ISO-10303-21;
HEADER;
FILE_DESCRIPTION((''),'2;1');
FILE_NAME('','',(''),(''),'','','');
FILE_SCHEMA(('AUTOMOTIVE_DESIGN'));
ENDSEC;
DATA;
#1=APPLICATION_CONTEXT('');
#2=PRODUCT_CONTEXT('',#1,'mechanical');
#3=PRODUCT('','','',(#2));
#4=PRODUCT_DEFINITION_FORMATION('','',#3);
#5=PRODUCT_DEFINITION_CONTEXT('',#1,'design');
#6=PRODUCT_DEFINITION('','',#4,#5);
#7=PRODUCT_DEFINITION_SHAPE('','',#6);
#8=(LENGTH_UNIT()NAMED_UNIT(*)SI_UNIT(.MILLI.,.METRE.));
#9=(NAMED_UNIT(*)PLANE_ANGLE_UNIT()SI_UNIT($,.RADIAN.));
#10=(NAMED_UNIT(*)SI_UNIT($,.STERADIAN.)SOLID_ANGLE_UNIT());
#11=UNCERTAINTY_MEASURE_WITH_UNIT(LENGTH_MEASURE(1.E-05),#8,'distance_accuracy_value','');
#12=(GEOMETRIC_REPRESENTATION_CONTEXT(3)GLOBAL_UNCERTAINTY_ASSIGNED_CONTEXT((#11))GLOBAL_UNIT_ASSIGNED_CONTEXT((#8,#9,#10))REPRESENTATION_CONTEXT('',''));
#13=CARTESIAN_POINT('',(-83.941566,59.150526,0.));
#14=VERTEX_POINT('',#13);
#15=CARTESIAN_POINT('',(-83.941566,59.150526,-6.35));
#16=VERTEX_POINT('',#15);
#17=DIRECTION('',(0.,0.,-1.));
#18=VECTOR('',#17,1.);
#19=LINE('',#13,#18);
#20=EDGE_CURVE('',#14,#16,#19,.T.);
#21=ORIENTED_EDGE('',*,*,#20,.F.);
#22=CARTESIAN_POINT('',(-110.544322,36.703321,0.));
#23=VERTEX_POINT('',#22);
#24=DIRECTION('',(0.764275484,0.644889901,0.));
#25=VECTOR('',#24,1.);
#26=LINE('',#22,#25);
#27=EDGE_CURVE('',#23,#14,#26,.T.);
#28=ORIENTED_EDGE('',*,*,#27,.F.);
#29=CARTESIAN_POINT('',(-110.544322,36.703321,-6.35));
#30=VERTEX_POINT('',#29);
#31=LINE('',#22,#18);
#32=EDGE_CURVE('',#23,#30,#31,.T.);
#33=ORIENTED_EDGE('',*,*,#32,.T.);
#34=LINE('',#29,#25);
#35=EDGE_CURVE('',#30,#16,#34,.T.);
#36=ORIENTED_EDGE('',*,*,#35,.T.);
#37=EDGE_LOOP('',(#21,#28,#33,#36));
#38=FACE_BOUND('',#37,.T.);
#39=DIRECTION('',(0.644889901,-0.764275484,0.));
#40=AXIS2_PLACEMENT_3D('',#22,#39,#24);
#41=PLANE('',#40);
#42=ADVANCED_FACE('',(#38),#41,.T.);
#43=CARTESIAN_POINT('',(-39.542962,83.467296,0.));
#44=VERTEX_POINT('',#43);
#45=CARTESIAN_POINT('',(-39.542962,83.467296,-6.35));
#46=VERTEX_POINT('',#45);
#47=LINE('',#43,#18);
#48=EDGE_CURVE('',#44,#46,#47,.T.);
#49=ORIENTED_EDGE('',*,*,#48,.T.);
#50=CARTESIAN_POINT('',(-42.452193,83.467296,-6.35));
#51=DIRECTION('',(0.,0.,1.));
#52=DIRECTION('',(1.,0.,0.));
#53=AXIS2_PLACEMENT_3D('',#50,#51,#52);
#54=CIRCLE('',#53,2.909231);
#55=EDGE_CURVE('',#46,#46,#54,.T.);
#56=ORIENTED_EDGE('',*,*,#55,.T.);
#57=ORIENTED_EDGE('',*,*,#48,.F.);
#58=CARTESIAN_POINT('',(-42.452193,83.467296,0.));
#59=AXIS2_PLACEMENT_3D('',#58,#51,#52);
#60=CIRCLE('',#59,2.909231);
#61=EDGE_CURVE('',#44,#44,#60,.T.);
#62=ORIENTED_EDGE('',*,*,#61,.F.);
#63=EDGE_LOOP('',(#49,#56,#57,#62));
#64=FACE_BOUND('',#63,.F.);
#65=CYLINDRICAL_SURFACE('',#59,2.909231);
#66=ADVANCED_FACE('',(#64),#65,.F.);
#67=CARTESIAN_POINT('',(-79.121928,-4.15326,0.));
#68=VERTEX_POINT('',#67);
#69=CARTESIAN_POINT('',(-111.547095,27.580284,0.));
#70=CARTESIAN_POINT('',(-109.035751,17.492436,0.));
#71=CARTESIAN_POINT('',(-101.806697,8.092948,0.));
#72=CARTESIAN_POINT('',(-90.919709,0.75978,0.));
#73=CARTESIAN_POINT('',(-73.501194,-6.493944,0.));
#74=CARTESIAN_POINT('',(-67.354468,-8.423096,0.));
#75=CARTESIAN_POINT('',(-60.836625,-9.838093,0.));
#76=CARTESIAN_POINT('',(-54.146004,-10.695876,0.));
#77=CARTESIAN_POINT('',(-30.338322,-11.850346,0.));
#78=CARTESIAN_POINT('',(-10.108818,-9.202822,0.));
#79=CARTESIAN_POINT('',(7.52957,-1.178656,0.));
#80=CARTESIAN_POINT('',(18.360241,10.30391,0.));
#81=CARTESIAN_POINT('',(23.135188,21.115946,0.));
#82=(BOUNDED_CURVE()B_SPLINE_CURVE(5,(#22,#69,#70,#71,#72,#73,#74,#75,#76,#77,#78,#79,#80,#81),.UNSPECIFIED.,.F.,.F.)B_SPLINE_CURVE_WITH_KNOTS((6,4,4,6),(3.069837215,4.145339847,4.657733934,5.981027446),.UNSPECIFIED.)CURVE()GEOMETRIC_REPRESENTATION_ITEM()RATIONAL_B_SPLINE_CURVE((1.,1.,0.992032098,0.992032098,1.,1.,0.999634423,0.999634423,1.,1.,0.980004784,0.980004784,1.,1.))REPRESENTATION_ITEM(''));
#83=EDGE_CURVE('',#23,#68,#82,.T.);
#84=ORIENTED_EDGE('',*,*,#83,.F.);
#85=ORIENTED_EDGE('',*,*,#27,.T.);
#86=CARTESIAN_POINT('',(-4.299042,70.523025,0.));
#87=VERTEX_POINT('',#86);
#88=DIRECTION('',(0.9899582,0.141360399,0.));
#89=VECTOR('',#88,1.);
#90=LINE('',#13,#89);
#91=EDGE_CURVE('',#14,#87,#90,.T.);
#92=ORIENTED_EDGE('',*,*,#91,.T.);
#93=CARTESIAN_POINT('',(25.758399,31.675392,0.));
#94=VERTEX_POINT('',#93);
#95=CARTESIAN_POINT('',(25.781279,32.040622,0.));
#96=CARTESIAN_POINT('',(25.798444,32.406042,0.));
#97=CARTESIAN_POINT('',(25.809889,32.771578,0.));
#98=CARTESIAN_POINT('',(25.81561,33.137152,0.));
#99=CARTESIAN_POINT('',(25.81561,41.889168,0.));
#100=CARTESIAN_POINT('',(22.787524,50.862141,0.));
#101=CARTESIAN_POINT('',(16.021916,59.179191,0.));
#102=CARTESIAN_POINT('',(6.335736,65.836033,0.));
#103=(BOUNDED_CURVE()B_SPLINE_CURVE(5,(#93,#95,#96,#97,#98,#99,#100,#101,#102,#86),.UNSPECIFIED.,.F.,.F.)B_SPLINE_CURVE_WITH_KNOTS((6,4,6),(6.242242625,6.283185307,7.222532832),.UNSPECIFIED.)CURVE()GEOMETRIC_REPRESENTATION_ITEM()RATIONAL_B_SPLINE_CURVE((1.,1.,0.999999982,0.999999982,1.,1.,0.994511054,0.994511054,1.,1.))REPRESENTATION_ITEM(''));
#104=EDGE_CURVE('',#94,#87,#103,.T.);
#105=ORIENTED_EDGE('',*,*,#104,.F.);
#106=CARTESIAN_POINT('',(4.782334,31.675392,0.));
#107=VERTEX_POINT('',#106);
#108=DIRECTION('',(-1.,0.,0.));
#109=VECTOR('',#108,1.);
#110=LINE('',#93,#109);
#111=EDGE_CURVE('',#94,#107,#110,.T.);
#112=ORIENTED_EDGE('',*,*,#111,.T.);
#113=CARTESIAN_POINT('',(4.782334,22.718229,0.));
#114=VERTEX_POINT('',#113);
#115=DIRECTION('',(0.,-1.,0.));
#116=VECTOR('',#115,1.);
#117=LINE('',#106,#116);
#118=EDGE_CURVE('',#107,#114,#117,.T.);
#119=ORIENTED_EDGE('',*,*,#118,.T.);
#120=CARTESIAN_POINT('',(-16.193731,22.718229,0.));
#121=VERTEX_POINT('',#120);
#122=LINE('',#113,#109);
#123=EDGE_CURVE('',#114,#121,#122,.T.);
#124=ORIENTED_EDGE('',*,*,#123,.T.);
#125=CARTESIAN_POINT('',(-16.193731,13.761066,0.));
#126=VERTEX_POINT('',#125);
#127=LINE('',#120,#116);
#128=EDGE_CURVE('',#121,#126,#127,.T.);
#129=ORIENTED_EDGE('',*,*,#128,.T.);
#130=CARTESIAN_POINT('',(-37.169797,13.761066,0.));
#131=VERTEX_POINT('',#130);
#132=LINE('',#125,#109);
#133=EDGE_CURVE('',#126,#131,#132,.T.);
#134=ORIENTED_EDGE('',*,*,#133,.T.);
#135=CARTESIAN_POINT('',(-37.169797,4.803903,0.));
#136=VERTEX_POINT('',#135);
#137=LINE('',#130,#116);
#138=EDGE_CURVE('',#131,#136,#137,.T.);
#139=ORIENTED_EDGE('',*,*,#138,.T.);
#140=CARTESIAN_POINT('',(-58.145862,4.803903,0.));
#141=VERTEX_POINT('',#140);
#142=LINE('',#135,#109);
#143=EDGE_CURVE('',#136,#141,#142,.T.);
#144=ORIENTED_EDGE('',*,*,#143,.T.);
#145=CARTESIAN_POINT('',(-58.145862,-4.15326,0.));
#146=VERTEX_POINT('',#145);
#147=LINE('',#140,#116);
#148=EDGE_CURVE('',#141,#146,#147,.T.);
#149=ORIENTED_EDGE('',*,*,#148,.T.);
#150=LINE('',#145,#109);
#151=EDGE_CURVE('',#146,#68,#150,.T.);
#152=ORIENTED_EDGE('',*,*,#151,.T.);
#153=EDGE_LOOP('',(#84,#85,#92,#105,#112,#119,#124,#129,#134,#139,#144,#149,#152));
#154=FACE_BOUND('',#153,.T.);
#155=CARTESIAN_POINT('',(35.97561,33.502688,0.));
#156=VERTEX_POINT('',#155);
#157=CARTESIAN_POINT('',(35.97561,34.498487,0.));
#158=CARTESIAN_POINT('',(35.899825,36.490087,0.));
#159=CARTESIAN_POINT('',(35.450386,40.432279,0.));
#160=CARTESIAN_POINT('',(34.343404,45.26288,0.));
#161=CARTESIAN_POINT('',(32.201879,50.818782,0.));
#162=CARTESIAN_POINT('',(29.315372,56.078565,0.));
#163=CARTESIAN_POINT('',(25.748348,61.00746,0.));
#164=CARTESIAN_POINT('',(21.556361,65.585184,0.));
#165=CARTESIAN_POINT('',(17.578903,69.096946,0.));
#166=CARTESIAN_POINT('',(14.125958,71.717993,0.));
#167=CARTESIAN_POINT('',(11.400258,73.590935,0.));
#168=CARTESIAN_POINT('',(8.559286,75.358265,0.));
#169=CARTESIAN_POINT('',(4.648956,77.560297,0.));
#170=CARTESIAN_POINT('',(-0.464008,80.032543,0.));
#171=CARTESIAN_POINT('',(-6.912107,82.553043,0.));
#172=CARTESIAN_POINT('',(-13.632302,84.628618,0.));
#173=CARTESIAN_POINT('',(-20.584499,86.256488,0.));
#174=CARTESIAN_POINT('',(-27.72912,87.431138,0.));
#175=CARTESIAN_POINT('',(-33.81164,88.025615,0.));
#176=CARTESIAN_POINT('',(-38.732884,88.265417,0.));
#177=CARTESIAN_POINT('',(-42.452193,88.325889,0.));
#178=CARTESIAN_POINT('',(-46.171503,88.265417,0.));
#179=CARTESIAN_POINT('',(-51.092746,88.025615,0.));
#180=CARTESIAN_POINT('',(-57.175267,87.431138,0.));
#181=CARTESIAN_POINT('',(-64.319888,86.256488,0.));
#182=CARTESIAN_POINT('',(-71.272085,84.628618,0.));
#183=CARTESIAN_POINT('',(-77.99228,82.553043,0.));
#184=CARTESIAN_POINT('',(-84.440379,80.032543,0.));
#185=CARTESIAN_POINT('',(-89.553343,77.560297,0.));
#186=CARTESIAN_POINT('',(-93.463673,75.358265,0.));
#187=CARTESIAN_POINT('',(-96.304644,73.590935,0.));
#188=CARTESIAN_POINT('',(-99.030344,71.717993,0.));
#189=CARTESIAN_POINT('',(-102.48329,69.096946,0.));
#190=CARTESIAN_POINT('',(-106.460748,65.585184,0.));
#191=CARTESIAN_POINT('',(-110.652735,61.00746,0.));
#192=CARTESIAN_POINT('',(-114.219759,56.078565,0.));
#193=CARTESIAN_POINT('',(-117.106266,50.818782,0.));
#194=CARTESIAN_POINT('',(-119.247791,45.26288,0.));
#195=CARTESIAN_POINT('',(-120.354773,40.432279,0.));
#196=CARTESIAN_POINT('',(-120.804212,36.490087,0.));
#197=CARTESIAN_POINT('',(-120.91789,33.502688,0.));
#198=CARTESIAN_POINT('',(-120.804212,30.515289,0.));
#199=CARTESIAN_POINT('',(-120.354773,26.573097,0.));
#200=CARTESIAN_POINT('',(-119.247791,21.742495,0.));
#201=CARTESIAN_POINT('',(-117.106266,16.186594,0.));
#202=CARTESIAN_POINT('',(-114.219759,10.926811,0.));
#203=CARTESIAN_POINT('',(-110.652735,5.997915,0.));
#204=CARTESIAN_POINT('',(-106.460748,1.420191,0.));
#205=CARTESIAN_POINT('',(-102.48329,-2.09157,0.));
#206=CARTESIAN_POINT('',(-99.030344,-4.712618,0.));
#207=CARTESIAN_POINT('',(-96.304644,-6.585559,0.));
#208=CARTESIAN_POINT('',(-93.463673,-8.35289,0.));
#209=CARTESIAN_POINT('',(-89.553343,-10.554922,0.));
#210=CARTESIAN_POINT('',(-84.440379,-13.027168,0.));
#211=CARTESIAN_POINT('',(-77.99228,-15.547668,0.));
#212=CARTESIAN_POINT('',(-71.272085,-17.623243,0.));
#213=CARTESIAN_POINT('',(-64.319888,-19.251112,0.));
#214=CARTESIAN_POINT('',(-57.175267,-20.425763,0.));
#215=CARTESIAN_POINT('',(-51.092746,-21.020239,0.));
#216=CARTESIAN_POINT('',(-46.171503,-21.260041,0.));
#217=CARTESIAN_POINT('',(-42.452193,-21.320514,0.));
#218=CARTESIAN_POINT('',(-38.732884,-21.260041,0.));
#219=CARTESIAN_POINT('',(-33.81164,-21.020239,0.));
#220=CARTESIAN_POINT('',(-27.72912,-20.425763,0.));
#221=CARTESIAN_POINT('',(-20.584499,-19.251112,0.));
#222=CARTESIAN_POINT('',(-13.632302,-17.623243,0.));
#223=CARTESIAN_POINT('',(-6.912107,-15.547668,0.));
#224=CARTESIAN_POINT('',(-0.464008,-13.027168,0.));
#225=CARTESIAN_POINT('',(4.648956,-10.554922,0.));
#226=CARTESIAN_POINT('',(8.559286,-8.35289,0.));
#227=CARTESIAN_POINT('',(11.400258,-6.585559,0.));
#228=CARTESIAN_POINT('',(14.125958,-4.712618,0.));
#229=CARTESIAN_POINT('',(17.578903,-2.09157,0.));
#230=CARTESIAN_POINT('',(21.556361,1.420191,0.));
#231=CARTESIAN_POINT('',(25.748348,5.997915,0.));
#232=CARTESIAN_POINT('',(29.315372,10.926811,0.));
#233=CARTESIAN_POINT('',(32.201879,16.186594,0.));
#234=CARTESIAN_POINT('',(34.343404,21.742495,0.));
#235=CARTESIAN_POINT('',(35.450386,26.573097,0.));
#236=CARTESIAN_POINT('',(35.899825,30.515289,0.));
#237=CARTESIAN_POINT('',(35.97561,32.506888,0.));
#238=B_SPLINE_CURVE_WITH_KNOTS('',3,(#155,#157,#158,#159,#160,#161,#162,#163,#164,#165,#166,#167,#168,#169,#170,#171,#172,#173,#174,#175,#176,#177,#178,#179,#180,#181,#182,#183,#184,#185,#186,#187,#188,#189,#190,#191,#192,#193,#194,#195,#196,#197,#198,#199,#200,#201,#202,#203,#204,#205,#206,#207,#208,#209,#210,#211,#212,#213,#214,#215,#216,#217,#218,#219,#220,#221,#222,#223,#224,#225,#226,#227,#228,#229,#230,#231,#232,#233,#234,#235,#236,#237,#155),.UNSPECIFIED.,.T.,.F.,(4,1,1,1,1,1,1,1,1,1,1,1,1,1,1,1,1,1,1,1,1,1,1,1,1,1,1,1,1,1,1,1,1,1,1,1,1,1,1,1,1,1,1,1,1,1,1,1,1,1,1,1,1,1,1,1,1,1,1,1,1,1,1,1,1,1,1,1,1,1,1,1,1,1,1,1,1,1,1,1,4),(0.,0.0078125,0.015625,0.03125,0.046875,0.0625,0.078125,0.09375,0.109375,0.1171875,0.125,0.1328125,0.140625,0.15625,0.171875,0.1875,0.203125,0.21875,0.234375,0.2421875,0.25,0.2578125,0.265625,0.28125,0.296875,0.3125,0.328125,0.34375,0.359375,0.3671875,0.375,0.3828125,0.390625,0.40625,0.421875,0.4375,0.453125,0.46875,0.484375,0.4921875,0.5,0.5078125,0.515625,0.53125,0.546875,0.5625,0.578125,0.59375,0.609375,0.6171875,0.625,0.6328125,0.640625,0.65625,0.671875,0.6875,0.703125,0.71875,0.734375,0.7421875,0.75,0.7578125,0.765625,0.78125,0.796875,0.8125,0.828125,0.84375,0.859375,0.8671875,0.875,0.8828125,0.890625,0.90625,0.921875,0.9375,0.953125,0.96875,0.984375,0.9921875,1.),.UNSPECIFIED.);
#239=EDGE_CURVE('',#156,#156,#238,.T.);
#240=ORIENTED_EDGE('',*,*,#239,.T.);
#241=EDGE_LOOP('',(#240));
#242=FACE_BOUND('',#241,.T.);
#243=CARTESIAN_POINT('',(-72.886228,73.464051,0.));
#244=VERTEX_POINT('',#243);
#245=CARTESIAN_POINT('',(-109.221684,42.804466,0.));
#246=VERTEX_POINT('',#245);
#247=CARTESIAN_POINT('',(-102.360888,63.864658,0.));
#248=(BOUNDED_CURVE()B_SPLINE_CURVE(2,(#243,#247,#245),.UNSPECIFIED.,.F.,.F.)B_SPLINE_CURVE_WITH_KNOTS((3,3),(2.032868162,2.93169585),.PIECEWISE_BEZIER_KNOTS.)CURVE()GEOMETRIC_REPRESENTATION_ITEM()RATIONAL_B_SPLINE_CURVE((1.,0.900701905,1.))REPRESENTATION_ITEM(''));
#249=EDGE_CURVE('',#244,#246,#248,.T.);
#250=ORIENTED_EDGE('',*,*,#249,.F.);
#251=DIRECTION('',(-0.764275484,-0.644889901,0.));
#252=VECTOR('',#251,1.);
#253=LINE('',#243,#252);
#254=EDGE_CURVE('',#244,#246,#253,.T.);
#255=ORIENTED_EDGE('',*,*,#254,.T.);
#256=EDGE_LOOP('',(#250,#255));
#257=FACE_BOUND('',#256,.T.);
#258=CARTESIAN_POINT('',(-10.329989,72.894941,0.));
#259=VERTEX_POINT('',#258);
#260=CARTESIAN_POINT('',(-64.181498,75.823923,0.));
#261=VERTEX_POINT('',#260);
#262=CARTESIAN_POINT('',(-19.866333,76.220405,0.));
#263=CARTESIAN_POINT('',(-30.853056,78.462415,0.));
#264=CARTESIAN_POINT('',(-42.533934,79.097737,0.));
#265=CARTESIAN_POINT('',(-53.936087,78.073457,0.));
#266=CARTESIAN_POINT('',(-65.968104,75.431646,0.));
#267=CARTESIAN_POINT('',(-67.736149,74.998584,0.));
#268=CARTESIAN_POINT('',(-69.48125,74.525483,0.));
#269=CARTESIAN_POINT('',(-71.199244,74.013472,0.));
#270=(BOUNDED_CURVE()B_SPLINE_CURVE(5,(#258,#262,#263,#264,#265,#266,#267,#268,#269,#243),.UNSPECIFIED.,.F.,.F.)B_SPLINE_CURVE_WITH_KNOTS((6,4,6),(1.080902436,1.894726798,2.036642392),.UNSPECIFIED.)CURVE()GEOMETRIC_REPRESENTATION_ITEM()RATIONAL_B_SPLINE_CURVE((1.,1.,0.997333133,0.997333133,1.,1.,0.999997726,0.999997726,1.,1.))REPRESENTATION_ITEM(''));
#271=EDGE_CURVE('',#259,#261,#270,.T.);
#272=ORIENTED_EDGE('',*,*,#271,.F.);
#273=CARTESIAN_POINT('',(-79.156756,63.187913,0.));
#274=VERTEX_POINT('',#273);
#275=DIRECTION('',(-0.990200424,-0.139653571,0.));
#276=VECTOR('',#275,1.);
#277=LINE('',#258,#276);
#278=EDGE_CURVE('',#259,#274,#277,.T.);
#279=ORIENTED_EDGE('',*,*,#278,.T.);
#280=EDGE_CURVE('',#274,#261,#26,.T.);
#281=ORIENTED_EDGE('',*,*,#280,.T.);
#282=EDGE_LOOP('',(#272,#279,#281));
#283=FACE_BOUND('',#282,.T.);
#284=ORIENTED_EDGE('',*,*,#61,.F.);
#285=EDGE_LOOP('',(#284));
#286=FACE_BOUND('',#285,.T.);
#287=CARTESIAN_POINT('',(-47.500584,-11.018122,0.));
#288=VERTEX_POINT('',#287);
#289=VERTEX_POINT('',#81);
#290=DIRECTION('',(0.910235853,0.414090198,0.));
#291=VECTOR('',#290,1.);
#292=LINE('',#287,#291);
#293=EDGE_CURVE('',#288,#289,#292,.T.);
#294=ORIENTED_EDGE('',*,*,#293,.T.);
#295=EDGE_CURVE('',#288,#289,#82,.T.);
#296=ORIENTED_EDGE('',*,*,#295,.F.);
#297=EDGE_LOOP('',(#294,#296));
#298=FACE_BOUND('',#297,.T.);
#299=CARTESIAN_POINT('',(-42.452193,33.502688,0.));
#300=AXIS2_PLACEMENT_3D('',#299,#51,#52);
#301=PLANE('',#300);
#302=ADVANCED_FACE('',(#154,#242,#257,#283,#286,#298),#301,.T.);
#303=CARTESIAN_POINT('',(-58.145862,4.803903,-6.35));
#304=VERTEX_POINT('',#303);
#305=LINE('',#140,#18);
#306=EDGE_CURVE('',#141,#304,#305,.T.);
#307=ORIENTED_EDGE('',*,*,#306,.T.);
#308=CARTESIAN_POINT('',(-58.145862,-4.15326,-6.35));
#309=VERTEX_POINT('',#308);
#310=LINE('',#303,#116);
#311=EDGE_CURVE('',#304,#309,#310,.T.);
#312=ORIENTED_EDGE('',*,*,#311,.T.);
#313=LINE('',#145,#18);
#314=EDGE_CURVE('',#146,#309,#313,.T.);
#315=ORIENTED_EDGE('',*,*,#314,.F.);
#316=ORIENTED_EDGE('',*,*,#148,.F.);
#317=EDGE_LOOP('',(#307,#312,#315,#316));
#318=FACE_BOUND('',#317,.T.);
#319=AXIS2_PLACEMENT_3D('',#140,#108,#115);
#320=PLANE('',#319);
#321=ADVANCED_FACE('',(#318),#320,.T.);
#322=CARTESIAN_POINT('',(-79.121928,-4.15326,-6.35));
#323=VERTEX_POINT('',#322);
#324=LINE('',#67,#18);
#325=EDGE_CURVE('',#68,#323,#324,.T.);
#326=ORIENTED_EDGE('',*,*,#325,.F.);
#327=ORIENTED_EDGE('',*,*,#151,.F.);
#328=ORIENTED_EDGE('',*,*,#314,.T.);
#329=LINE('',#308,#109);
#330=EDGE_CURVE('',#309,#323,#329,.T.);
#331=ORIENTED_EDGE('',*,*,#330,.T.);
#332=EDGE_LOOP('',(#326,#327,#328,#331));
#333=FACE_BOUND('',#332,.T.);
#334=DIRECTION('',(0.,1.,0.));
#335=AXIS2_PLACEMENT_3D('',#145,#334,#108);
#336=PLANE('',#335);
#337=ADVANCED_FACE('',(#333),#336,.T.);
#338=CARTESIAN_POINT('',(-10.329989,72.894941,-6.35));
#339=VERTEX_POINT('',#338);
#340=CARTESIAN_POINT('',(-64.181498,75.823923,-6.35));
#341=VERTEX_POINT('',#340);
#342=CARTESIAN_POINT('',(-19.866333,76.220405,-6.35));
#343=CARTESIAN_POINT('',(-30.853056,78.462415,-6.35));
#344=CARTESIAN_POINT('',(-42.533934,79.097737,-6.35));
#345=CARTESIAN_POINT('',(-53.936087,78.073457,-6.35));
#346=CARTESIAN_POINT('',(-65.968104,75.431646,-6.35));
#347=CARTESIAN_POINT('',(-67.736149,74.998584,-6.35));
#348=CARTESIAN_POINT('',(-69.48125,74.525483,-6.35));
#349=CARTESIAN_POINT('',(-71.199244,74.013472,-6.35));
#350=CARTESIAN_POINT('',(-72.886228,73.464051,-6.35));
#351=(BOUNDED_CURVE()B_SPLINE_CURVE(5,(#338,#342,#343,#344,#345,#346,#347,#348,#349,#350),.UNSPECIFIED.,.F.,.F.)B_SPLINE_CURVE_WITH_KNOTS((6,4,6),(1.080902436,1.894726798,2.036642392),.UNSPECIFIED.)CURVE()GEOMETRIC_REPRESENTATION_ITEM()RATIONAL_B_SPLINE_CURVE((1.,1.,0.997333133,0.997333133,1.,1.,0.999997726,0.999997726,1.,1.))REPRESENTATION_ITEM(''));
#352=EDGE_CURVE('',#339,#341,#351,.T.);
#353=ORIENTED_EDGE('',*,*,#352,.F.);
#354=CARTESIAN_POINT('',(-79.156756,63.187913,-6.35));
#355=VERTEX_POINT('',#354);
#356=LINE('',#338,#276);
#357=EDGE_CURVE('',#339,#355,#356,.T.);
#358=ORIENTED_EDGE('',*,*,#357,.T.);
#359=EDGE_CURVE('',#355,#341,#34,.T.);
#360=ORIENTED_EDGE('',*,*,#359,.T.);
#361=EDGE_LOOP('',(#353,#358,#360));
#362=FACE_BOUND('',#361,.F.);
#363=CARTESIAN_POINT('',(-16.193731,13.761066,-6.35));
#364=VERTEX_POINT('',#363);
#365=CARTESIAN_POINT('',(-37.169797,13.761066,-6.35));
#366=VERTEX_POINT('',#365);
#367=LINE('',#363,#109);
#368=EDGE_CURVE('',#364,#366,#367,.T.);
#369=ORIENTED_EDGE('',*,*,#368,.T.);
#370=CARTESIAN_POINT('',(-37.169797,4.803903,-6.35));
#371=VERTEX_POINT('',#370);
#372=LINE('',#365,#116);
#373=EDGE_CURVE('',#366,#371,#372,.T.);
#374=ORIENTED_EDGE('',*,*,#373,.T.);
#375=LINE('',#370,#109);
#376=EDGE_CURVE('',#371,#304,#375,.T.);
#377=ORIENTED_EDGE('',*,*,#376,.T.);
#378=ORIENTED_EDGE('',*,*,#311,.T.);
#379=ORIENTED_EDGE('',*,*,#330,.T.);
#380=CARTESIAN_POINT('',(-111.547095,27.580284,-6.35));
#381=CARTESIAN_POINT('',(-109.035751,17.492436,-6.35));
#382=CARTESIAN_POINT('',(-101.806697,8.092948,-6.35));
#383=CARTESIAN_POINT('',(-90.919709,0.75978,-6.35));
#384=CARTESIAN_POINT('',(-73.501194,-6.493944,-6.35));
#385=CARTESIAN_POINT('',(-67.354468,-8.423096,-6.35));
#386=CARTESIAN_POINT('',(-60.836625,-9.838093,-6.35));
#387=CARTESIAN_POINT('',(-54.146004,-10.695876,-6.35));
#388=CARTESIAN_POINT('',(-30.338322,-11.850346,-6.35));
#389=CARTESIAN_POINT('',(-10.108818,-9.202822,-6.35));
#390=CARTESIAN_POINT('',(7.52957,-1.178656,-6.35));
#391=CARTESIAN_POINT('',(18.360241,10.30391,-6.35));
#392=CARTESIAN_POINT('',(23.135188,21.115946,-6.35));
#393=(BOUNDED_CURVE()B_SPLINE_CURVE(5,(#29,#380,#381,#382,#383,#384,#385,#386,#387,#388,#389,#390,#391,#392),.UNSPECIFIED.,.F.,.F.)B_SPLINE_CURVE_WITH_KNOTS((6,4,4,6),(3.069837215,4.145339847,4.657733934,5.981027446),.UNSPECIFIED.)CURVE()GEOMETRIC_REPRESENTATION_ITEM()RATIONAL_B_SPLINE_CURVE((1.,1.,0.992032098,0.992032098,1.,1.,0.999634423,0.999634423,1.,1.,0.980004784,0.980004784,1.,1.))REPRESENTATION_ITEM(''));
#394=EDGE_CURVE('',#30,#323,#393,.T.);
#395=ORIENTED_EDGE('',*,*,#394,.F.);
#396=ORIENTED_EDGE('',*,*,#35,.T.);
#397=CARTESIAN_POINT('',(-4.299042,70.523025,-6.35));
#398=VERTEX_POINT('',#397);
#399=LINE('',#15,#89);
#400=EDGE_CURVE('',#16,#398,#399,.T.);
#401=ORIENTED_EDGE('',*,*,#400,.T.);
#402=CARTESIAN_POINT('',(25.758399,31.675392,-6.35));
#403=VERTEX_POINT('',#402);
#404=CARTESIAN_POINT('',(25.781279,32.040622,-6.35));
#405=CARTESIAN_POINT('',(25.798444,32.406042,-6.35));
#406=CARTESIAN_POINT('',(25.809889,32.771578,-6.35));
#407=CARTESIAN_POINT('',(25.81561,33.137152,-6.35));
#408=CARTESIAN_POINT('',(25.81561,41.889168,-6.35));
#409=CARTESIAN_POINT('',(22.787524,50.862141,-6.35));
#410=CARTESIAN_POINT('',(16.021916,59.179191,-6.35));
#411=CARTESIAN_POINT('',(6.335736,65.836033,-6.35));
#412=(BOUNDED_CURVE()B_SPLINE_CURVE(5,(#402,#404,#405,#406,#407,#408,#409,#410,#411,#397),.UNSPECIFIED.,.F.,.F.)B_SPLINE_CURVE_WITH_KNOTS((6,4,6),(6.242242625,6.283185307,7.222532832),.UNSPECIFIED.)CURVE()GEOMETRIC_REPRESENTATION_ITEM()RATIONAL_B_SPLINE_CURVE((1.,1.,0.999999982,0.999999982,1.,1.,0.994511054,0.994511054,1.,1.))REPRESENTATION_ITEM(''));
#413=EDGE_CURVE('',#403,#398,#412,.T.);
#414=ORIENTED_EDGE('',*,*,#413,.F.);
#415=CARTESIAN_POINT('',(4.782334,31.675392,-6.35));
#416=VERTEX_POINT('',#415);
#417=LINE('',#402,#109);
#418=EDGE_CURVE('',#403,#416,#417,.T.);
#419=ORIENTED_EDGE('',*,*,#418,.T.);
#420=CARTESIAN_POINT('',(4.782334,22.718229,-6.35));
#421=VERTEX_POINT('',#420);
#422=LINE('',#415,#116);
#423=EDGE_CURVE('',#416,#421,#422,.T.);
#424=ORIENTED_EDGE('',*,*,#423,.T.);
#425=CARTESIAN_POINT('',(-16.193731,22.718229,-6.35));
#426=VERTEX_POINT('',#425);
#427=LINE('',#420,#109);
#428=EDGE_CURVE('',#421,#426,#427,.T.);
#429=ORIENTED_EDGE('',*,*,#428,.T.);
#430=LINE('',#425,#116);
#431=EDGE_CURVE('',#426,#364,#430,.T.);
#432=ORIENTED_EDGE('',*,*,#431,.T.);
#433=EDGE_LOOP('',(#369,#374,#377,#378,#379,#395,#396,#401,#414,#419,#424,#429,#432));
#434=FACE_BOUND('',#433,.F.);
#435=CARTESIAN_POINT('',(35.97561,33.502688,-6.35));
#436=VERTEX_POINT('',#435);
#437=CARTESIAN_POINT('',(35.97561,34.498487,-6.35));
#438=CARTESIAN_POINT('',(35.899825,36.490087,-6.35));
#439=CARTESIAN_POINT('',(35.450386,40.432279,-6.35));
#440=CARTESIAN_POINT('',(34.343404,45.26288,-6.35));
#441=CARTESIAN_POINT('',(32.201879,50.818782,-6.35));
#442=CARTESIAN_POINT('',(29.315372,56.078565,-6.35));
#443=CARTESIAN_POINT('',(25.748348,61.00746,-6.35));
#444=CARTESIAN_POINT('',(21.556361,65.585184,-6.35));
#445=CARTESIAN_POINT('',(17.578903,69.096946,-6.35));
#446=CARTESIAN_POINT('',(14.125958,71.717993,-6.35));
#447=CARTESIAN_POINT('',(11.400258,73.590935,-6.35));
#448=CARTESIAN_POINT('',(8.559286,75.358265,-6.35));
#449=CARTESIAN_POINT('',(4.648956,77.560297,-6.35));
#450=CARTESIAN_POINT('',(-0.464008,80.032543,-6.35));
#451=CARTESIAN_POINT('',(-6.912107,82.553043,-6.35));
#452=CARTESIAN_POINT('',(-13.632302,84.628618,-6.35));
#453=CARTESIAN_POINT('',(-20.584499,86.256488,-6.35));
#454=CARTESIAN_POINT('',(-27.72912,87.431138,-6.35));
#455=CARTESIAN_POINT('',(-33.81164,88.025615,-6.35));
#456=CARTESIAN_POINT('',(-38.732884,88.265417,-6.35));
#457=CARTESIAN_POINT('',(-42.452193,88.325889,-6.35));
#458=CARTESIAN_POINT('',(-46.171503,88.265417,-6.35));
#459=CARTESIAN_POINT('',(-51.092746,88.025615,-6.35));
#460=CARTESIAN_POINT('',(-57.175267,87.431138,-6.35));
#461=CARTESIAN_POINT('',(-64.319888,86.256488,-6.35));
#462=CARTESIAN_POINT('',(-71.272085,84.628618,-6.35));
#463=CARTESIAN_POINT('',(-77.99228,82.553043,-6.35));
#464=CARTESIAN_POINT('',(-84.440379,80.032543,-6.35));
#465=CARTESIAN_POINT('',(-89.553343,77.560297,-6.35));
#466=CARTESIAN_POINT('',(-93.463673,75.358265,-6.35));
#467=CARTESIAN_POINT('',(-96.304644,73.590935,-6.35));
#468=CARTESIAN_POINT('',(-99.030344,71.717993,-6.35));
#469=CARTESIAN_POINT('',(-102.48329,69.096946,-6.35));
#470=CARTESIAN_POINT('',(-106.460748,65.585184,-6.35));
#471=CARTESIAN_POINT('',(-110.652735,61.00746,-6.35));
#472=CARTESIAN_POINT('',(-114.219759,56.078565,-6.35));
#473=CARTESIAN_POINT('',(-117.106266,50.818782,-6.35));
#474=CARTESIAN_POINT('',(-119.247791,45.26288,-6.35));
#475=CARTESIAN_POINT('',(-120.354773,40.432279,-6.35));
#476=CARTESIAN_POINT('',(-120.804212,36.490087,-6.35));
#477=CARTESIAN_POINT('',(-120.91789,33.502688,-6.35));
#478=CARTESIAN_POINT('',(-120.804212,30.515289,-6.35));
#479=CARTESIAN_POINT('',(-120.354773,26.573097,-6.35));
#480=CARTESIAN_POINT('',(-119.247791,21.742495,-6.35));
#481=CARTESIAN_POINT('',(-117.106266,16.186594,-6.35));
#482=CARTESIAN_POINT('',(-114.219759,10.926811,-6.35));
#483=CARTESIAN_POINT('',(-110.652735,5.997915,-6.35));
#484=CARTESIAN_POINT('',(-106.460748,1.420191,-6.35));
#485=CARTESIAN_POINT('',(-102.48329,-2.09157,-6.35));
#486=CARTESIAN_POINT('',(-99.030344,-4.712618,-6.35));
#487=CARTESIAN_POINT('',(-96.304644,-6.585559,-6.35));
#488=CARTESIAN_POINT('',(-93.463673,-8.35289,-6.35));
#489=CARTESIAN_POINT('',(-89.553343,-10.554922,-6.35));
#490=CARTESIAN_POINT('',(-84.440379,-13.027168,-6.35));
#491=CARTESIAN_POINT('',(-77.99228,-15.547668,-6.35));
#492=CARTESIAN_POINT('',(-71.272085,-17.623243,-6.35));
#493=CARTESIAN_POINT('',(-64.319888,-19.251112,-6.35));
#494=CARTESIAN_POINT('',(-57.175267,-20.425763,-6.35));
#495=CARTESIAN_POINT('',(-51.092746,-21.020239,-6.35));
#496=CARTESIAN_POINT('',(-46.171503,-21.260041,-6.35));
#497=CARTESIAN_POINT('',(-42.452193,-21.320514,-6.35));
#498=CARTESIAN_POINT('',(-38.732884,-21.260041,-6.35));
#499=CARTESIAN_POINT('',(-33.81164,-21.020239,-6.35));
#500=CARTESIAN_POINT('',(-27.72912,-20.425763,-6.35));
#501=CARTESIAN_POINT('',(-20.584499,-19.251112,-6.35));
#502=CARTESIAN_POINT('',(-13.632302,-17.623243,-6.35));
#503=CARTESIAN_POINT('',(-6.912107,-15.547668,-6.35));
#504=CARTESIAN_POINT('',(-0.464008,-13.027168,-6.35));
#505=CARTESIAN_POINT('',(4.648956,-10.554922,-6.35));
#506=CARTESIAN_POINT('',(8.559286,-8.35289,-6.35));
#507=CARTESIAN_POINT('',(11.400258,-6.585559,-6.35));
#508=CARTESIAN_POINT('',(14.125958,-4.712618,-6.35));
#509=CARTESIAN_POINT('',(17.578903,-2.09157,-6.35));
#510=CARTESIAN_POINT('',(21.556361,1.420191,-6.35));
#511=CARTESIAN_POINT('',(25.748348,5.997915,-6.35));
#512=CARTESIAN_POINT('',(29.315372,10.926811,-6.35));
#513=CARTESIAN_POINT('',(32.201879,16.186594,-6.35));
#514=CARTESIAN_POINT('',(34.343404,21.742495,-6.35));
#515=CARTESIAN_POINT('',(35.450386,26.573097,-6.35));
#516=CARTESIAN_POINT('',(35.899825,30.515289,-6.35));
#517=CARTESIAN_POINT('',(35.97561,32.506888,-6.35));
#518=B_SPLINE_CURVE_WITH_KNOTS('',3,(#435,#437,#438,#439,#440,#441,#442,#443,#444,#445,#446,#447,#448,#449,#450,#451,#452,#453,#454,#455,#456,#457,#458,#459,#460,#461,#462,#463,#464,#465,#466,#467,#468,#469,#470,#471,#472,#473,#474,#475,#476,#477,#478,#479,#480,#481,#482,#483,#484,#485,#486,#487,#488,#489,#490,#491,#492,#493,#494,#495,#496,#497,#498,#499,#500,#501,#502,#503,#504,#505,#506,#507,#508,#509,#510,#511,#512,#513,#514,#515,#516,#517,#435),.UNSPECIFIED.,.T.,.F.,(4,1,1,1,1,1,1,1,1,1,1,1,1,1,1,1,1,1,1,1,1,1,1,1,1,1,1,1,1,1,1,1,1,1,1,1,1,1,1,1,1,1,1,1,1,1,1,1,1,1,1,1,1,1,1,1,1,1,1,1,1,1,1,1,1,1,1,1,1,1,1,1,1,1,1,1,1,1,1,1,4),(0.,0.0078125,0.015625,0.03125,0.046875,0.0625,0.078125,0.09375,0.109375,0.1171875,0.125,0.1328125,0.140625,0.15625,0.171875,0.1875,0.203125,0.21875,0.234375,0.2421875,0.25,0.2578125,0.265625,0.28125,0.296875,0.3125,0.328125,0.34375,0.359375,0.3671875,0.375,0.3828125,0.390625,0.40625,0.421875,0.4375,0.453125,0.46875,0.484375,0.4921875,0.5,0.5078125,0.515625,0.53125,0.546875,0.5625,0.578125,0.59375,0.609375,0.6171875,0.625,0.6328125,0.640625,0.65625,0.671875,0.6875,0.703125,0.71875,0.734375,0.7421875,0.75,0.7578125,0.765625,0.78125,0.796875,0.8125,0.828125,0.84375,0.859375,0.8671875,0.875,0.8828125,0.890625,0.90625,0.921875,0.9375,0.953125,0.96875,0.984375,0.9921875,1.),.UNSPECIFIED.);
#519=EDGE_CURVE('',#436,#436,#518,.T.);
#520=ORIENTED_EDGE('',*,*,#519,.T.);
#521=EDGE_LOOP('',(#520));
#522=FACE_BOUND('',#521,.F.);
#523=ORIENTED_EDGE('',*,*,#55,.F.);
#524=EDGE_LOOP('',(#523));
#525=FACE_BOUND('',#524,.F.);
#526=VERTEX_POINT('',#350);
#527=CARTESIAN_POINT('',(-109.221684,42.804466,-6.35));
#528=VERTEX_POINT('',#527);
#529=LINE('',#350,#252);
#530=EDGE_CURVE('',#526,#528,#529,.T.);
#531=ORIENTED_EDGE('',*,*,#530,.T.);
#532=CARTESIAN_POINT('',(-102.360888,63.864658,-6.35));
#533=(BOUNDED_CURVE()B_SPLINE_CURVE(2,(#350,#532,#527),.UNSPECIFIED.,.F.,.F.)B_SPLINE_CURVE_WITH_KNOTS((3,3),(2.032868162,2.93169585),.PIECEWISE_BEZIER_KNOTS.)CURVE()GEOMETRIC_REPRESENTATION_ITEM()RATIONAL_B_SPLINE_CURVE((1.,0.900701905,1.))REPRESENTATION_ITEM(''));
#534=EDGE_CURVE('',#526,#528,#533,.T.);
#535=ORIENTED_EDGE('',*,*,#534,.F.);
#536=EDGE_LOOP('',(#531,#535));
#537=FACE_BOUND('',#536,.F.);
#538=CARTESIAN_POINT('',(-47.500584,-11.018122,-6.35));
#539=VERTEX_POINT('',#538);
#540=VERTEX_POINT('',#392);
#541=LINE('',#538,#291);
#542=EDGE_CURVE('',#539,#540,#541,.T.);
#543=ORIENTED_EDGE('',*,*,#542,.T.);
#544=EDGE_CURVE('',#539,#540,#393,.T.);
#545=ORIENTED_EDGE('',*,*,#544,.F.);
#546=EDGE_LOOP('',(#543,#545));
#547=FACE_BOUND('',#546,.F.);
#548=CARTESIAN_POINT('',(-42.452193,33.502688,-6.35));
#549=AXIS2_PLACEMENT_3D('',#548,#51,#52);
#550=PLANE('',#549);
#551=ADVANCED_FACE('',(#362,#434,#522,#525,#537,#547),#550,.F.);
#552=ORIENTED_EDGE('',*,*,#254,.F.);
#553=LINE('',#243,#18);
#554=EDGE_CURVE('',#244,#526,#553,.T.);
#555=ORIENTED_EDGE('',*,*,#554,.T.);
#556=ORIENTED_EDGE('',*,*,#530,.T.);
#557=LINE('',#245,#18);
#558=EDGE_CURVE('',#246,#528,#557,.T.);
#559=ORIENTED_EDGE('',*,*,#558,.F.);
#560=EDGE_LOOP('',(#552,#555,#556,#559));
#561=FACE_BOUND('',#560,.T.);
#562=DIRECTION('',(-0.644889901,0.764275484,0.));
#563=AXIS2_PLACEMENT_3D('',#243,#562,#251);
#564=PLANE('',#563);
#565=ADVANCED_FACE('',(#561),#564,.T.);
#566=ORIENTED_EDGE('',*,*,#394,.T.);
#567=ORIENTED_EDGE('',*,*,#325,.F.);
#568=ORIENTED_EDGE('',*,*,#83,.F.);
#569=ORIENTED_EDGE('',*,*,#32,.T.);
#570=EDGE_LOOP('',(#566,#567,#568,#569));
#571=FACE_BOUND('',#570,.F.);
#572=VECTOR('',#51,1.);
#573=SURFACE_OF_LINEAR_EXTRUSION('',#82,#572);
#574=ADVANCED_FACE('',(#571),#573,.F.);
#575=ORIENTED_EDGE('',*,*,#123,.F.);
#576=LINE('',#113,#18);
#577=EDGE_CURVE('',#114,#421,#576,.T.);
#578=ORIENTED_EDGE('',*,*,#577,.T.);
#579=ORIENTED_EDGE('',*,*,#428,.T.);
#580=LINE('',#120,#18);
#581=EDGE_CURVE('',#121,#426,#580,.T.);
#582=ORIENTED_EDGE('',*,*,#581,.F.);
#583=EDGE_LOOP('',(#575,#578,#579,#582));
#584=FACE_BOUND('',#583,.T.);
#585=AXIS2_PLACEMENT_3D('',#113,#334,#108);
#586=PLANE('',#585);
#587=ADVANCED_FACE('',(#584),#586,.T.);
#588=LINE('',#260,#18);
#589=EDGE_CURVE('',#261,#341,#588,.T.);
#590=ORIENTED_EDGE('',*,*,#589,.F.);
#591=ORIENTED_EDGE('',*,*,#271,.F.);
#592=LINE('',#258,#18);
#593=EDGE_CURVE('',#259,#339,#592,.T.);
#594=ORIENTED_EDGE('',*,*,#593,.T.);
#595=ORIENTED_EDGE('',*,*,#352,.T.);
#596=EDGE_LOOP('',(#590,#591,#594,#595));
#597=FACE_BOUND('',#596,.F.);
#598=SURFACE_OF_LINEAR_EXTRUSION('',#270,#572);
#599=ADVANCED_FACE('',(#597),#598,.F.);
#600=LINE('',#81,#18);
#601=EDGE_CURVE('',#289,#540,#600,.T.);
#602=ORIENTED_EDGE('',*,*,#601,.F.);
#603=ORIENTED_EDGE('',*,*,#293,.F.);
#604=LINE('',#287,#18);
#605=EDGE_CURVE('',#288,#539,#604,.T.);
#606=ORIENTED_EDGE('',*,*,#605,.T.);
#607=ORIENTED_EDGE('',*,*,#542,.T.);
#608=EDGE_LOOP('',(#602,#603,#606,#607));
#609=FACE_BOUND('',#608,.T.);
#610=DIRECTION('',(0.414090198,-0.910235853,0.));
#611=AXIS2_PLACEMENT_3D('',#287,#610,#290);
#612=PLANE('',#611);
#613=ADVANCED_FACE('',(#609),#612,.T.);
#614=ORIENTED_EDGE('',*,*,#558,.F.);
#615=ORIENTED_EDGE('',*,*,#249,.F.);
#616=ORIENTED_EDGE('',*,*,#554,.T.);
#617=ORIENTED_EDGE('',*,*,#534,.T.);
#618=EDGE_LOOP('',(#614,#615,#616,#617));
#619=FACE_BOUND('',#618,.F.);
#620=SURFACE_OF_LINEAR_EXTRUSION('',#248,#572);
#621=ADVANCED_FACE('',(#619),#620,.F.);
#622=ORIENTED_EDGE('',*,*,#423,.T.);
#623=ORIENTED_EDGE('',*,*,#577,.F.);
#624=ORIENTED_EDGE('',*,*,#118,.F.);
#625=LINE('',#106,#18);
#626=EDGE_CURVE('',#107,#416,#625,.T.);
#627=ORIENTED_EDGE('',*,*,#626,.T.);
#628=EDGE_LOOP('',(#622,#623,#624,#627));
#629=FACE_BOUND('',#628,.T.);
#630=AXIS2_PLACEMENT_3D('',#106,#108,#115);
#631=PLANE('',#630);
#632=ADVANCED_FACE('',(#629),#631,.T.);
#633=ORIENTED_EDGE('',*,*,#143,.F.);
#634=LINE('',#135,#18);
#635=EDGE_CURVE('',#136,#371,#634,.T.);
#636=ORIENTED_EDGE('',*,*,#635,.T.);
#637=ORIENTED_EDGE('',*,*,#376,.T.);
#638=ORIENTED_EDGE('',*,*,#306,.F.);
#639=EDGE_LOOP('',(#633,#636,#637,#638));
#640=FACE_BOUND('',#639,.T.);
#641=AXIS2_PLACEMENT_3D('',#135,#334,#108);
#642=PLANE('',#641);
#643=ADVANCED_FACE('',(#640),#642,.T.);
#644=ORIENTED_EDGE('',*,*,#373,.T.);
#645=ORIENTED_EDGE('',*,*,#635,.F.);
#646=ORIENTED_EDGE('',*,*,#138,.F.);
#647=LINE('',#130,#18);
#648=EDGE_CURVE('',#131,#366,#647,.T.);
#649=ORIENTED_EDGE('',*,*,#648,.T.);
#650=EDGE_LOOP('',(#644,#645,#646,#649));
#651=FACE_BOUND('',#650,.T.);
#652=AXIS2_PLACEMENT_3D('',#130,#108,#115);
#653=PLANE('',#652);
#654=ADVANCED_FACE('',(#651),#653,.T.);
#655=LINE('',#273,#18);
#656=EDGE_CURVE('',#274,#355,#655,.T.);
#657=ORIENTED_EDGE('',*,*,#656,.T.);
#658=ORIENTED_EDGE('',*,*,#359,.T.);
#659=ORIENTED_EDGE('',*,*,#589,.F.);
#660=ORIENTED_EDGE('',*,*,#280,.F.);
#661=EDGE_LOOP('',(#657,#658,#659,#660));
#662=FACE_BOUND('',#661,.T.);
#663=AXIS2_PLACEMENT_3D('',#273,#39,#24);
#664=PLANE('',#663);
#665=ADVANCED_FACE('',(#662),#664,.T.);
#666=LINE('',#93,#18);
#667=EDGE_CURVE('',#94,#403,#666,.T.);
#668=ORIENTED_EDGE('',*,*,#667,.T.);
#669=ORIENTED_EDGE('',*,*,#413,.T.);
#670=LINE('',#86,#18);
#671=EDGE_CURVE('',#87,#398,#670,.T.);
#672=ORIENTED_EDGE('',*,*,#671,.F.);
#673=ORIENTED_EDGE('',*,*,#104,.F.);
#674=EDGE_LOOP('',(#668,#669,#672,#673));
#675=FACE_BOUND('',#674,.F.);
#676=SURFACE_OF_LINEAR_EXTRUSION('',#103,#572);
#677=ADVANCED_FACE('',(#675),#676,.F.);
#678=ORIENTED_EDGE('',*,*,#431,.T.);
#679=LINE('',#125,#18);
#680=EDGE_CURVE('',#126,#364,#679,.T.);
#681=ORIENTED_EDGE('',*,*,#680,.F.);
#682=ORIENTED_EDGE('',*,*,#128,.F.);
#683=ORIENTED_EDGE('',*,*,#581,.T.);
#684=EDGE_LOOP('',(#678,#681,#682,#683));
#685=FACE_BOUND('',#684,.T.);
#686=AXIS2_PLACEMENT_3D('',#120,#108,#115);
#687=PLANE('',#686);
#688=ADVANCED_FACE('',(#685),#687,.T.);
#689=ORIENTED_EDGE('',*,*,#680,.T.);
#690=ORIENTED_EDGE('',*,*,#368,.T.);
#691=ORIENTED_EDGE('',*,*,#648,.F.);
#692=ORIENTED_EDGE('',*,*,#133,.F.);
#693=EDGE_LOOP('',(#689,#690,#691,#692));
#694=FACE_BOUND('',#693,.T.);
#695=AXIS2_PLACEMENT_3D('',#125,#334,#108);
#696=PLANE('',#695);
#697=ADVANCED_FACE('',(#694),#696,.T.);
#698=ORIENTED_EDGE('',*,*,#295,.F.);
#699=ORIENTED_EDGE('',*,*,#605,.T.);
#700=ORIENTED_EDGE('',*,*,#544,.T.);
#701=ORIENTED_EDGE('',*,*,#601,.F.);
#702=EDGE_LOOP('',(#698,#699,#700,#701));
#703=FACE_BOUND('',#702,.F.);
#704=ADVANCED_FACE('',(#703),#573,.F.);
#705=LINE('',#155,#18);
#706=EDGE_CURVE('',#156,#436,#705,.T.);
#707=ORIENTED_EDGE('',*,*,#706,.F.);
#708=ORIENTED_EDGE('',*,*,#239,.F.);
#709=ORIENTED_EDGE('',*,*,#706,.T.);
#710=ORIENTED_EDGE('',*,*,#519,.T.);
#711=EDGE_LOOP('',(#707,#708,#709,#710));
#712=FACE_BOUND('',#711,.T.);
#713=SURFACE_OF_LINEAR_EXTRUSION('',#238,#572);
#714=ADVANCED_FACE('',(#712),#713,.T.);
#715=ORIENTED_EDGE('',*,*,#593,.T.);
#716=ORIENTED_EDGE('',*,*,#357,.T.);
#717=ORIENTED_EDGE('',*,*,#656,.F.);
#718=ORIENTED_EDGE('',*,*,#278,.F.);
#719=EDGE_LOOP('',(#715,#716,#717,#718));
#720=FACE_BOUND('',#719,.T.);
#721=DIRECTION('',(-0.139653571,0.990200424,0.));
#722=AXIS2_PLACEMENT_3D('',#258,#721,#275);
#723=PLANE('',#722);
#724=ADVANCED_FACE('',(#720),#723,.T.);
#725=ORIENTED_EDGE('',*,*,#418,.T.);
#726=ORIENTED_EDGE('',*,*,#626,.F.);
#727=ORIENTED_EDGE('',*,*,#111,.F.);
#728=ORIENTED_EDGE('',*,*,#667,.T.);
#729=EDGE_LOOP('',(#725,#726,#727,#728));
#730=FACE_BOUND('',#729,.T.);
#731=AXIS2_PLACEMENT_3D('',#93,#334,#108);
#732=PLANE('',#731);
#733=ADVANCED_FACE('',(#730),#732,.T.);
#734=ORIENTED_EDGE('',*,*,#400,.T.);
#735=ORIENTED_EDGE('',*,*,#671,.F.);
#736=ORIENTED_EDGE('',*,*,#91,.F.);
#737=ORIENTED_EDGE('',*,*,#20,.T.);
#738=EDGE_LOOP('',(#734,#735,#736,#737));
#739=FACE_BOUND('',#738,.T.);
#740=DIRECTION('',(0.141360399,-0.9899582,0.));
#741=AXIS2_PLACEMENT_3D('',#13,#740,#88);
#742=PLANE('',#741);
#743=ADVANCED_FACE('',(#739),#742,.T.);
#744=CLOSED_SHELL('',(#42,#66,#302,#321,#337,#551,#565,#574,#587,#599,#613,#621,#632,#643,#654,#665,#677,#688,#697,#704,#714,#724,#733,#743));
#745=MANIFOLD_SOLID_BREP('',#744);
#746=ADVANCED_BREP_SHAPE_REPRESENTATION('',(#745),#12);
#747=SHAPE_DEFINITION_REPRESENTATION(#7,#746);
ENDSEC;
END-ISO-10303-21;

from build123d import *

# Parameters (mm, degrees)
F0_R     = 2.9092310145
F1_DEPTH = 6.35


# Not quite as in the source:
# - the dataset's text gives a spline's control points without its knots; the knots are read off the source's solid


with BuildPart() as f1:
    # F0 (on Top) → F1 (new body)
    with BuildSketch(Plane.XY):
        with BuildLine():
            add(Edge.make_bspline(
                [(35.9756101214, 33.5026877272), (35.9756101214, 34.4984874099), (35.8998248814, 36.4900867753), (35.4503858288, 40.4322788005), (34.3434038279, 45.2628804916), (32.2018791957, 50.8187815017), (29.3153723523, 56.0785646116), (25.7483483064, 61.007460002), (21.5563607444, 65.5851842551), (17.578902898, 69.0969458075), (14.1259575568, 71.7179929744), (11.4002575101, 73.5909345896), (8.5592861675, 75.3582652241), (4.6489563898, 77.560297414), (-0.4640075549, 80.0325432498), (-6.9121068292, 82.5530431102), (-13.6323017507, 84.628618245), (-20.5844989833, 86.2564877673), (-27.7291202294, 87.4311380236), (-33.8116403616, 88.02561485), (-38.7328840311, 88.2654165363), (-42.4521933959, 88.3258891821), (-46.1715027606, 88.2654165363), (-51.0927464301, 88.02561485), (-57.1752665623, 87.4311380236), (-64.3198878084, 86.2564877673), (-71.272085041, 84.628618245), (-77.9922799626, 82.5530431102), (-84.4403792369, 80.0325432498), (-89.5533431816, 77.560297414), (-93.4636729593, 75.3582652241), (-96.3046443018, 73.5909345896), (-99.0303443486, 71.7179929744), (-102.4832896898, 69.0969458075), (-106.4607475362, 65.5851842551), (-110.6527350981, 61.007460002), (-114.219759144, 56.0785646116), (-117.1062659874, 50.8187815017), (-119.2477906196, 45.2628804916), (-120.3547726206, 40.4322788005), (-120.8042116732, 36.4900867753), (-120.917889533, 33.5026877272), (-120.8042116732, 30.5152886791), (-120.3547726206, 26.5730966538), (-119.2477906196, 21.7424949627), (-117.1062659874, 16.1865939527), (-114.219759144, 10.9268108427), (-110.6527350981, 5.9979154523), (-106.4607475362, 1.4201911992), (-102.4832896898, -2.0915703531), (-99.0303443486, -4.7126175201), (-96.3046443018, -6.5855591353), (-93.4636729593, -8.3528897698), (-89.5533431816, -10.5549219597), (-84.4403792369, -13.0271677955), (-77.9922799626, -15.5476676559), (-71.272085041, -17.6232427907), (-64.3198878084, -19.251112313), (-57.1752665623, -20.4257625693), (-51.0927464301, -21.0202393957), (-46.1715027606, -21.260041082), (-42.4521933959, -21.3205137277), (-38.7328840311, -21.260041082), (-33.8116403616, -21.0202393957), (-27.7291202294, -20.4257625693), (-20.5844989833, -19.251112313), (-13.6323017507, -17.6232427907), (-6.9121068292, -15.5476676559), (-0.4640075549, -13.0271677955), (4.6489563898, -10.5549219597), (8.5592861675, -8.3528897698), (11.4002575101, -6.5855591353), (14.1259575568, -4.7126175201), (17.578902898, -2.0915703531), (21.5563607444, 1.4201911992), (25.7483483064, 5.9979154523), (29.3153723523, 10.9268108427), (32.2018791957, 16.1865939527), (34.3434038279, 21.7424949627), (35.4503858288, 26.5730966538), (35.8998248814, 30.5152886791), (35.9756101214, 32.5068880445), (35.9756101214, 33.5026877272)],
                knots=[0, 0, 0, 0, 0.0078125, 0.015625, 0.03125, 0.046875, 0.0625, 0.078125, 0.09375, 0.109375, 0.1171875, 0.125, 0.1328125, 0.140625, 0.15625, 0.171875, 0.1875, 0.203125, 0.21875, 0.234375, 0.2421875, 0.25, 0.2578125, 0.265625, 0.28125, 0.296875, 0.3125, 0.328125, 0.34375, 0.359375, 0.3671875, 0.375, 0.3828125, 0.390625, 0.40625, 0.421875, 0.4375, 0.453125, 0.46875, 0.484375, 0.4921875, 0.5, 0.5078125, 0.515625, 0.53125, 0.546875, 0.5625, 0.578125, 0.59375, 0.609375, 0.6171875, 0.625, 0.6328125, 0.640625, 0.65625, 0.671875, 0.6875, 0.703125, 0.71875, 0.734375, 0.7421875, 0.75, 0.7578125, 0.765625, 0.78125, 0.796875, 0.8125, 0.828125, 0.84375, 0.859375, 0.8671875, 0.875, 0.8828125, 0.890625, 0.90625, 0.921875, 0.9375, 0.953125, 0.96875, 0.984375, 0.9921875, 1, 1, 1, 1], degree=3))
        make_face()
        with BuildLine():
            add(Edge.make_bspline(
                [(25.8156101214, 33.5026877272), (25.8156101214, 57.2508032081), (-4.2990424349, 70.5230250799)],
                knots=[0, 0, 0, 0.9777681056, 0.9777681056, 0.9777681056], degree=2, weights=[1, 0.8828575027, 1]))
            add(Edge.make_bspline(
                [(25.7583993431, 31.6753923662), (25.8156101214, 32.588657052), (25.8156101214, 33.5026877272)],
                knots=[6.2422426246, 6.2422426246, 6.2422426246, 6.2831853072, 6.2831853072, 6.2831853072], degree=2, weights=[1, 0.9997904694, 1]))
            add(Edge.make_bspline(
                [(23.1351877715, 21.1159459884), (25.4211705669, 26.2921561677), (25.7583993431, 31.6753923662)],
                knots=[6.0020340843, 6.0020340843, 6.0020340843, 6.2422426246, 6.2422426246, 6.2422426246], degree=2, weights=[1, 0.9927961481, 1]))
            add(Edge.make_bspline(
                [(-47.5005840408, -11.0181219568), (7.7603026977, -13.6978053575), (23.1351877715, 21.1159459884)],
                knots=[4.6383716106, 4.6383716106, 4.6383716106, 6.0020340843, 6.0020340843, 6.0020340843], degree=2, weights=[1, 0.7764199467, 1]))
            add(Edge.make_bspline(
                [(-79.1219276756, -4.1532595133), (-64.6320440132, -10.187391731), (-47.5005840408, -11.0181219568)],
                knots=[4.1453398468, 4.1453398468, 4.1453398468, 4.6383716106, 4.6383716106, 4.6383716106], degree=2, weights=[1, 0.9697685237, 1]))
            add(Edge.make_bspline(
                [(-110.5443222079, 36.703320692), (-113.4632203195, 10.1477455995), (-79.1219276756, -4.1532595133)],
                knots=[3.0698372147, 3.0698372147, 3.0698372147, 4.1453398468, 4.1453398468, 4.1453398468], degree=2, weights=[1, 0.8588626412, 1]))
            add(Edge.make_bspline(
                [(-109.2216839605, 42.8044663438), (-110.2057251662, 39.7838116244), (-110.5443222079, 36.703320692)],
                knots=[2.9316958501, 2.9316958501, 2.9316958501, 3.0698372147, 3.0698372147, 3.0698372147], degree=2, weights=[1, 0.9976155686, 1]))
            add(Edge.make_bspline(
                [(-72.8862277584, 73.4640507782), (-102.3608878748, 63.8646576809), (-109.2216839605, 42.8044663438)],
                knots=[2.0328681623, 2.0328681623, 2.0328681623, 2.9316958501, 2.9316958501, 2.9316958501], degree=2, weights=[1, 0.9007019054, 1]))
            add(Edge.make_bspline(
                [(-64.1814982473, 75.8239225616), (-68.6586891877, 74.8408878448), (-72.8862277584, 73.4640507782)],
                knots=[1.8947267977, 1.8947267977, 1.8947267977, 2.0328681623, 2.0328681623, 2.0328681623], degree=2, weights=[1, 0.9976155686, 1]))
            add(Edge.make_bspline(
                [(-10.329989388, 72.8949414232), (-36.2906029544, 81.9477887805), (-64.1814982473, 75.8239225616)],
                knots=[1.0809024359, 1.0809024359, 1.0809024359, 1.8947267977, 1.8947267977, 1.8947267977], degree=2, weights=[1, 0.9183472822, 1]))
            add(Edge.make_bspline(
                [(-4.2990424349, 70.5230250799), (-7.2209128714, 71.8107607641), (-10.329989388, 72.8949414232)],
                knots=[0.9777681056, 0.9777681056, 0.9777681056, 1.0809024359, 1.0809024359, 1.0809024359], degree=2, weights=[1, 0.9986707083, 1]))
        make_face(mode=Mode.SUBTRACT)
        with Locations((-42.4521933959, 83.4672963517)):
            Circle(F0_R, mode=Mode.SUBTRACT)
        with BuildLine():
            Line((-110.5443222079, 36.703320692), (-83.941566481, 59.1505257266))
            Line((-83.941566481, 59.1505257266), (-79.1567558079, 63.1879129557))
            Line((-79.1567558079, 63.1879129557), (-64.1814982473, 75.8239225616))
            add(Edge.make_bspline(
                [(-64.1814982473, 75.8239225616), (-68.6586891877, 74.8408878448), (-72.8862277584, 73.4640507782)],
                knots=[1.8947267977, 1.8947267977, 1.8947267977, 2.0328681623, 2.0328681623, 2.0328681623], degree=2, weights=[1, 0.9976155686, 1]))
            Line((-72.8862277584, 73.4640507782), (-109.2216839605, 42.8044663438))
            add(Edge.make_bspline(
                [(-109.2216839605, 42.8044663438), (-110.2057251662, 39.7838116244), (-110.5443222079, 36.703320692)],
                knots=[2.9316958501, 2.9316958501, 2.9316958501, 3.0698372147, 3.0698372147, 3.0698372147], degree=2, weights=[1, 0.9976155686, 1]))
        make_face()
        with BuildLine():
            Line((-83.941566481, 59.1505257266), (-4.2990424349, 70.5230250799))
            add(Edge.make_bspline(
                [(-4.2990424349, 70.5230250799), (-7.2209128714, 71.8107607641), (-10.329989388, 72.8949414232)],
                knots=[0.9777681056, 0.9777681056, 0.9777681056, 1.0809024359, 1.0809024359, 1.0809024359], degree=2, weights=[1, 0.9986707083, 1]))
            Line((-10.329989388, 72.8949414232), (-79.1567558079, 63.1879129557))
            Line((-79.1567558079, 63.1879129557), (-83.941566481, 59.1505257266))
        make_face()
        with BuildLine():
            add(Edge.make_bspline(
                [(23.1351877715, 21.1159459884), (25.4211705669, 26.2921561677), (25.7583993431, 31.6753923662)],
                knots=[6.0020340843, 6.0020340843, 6.0020340843, 6.2422426246, 6.2422426246, 6.2422426246], degree=2, weights=[1, 0.9927961481, 1]))
            Line((25.7583993431, 31.6753923662), (6.8798116408, 31.6753923662))
            Line((6.8798116408, 31.6753923662), (5.5530862883, 31.6753923662))
            Line((5.5530862883, 31.6753923662), (4.7823339394, 31.6753923662))
            Line((4.7823339394, 31.6753923662), (4.7823339394, 22.7182293963))
            Line((4.7823339394, 22.7182293963), (-16.1937314644, 22.7182293963))
            Line((-16.1937314644, 22.7182293963), (-16.1937314644, 13.7610664264))
            Line((-16.1937314644, 13.7610664264), (-37.1697968681, 13.7610664264))
            Line((-37.1697968681, 13.7610664264), (-37.1697968681, 4.8039034566))
            Line((-37.1697968681, 4.8039034566), (-58.1458622718, 4.8039034566))
            Line((-58.1458622718, 4.8039034566), (-58.1458622718, -4.1532595133))
            Line((-58.1458622718, -4.1532595133), (-79.1219276756, -4.1532595133))
            add(Edge.make_bspline(
                [(-79.1219276756, -4.1532595133), (-64.6320440132, -10.187391731), (-47.5005840408, -11.0181219568)],
                knots=[4.1453398468, 4.1453398468, 4.1453398468, 4.6383716106, 4.6383716106, 4.6383716106], degree=2, weights=[1, 0.9697685237, 1]))
            Line((-47.5005840408, -11.0181219568), (23.1351877715, 21.1159459884))
        make_face()
    extrude(amount=-F1_DEPTH)


solid = f1.part
